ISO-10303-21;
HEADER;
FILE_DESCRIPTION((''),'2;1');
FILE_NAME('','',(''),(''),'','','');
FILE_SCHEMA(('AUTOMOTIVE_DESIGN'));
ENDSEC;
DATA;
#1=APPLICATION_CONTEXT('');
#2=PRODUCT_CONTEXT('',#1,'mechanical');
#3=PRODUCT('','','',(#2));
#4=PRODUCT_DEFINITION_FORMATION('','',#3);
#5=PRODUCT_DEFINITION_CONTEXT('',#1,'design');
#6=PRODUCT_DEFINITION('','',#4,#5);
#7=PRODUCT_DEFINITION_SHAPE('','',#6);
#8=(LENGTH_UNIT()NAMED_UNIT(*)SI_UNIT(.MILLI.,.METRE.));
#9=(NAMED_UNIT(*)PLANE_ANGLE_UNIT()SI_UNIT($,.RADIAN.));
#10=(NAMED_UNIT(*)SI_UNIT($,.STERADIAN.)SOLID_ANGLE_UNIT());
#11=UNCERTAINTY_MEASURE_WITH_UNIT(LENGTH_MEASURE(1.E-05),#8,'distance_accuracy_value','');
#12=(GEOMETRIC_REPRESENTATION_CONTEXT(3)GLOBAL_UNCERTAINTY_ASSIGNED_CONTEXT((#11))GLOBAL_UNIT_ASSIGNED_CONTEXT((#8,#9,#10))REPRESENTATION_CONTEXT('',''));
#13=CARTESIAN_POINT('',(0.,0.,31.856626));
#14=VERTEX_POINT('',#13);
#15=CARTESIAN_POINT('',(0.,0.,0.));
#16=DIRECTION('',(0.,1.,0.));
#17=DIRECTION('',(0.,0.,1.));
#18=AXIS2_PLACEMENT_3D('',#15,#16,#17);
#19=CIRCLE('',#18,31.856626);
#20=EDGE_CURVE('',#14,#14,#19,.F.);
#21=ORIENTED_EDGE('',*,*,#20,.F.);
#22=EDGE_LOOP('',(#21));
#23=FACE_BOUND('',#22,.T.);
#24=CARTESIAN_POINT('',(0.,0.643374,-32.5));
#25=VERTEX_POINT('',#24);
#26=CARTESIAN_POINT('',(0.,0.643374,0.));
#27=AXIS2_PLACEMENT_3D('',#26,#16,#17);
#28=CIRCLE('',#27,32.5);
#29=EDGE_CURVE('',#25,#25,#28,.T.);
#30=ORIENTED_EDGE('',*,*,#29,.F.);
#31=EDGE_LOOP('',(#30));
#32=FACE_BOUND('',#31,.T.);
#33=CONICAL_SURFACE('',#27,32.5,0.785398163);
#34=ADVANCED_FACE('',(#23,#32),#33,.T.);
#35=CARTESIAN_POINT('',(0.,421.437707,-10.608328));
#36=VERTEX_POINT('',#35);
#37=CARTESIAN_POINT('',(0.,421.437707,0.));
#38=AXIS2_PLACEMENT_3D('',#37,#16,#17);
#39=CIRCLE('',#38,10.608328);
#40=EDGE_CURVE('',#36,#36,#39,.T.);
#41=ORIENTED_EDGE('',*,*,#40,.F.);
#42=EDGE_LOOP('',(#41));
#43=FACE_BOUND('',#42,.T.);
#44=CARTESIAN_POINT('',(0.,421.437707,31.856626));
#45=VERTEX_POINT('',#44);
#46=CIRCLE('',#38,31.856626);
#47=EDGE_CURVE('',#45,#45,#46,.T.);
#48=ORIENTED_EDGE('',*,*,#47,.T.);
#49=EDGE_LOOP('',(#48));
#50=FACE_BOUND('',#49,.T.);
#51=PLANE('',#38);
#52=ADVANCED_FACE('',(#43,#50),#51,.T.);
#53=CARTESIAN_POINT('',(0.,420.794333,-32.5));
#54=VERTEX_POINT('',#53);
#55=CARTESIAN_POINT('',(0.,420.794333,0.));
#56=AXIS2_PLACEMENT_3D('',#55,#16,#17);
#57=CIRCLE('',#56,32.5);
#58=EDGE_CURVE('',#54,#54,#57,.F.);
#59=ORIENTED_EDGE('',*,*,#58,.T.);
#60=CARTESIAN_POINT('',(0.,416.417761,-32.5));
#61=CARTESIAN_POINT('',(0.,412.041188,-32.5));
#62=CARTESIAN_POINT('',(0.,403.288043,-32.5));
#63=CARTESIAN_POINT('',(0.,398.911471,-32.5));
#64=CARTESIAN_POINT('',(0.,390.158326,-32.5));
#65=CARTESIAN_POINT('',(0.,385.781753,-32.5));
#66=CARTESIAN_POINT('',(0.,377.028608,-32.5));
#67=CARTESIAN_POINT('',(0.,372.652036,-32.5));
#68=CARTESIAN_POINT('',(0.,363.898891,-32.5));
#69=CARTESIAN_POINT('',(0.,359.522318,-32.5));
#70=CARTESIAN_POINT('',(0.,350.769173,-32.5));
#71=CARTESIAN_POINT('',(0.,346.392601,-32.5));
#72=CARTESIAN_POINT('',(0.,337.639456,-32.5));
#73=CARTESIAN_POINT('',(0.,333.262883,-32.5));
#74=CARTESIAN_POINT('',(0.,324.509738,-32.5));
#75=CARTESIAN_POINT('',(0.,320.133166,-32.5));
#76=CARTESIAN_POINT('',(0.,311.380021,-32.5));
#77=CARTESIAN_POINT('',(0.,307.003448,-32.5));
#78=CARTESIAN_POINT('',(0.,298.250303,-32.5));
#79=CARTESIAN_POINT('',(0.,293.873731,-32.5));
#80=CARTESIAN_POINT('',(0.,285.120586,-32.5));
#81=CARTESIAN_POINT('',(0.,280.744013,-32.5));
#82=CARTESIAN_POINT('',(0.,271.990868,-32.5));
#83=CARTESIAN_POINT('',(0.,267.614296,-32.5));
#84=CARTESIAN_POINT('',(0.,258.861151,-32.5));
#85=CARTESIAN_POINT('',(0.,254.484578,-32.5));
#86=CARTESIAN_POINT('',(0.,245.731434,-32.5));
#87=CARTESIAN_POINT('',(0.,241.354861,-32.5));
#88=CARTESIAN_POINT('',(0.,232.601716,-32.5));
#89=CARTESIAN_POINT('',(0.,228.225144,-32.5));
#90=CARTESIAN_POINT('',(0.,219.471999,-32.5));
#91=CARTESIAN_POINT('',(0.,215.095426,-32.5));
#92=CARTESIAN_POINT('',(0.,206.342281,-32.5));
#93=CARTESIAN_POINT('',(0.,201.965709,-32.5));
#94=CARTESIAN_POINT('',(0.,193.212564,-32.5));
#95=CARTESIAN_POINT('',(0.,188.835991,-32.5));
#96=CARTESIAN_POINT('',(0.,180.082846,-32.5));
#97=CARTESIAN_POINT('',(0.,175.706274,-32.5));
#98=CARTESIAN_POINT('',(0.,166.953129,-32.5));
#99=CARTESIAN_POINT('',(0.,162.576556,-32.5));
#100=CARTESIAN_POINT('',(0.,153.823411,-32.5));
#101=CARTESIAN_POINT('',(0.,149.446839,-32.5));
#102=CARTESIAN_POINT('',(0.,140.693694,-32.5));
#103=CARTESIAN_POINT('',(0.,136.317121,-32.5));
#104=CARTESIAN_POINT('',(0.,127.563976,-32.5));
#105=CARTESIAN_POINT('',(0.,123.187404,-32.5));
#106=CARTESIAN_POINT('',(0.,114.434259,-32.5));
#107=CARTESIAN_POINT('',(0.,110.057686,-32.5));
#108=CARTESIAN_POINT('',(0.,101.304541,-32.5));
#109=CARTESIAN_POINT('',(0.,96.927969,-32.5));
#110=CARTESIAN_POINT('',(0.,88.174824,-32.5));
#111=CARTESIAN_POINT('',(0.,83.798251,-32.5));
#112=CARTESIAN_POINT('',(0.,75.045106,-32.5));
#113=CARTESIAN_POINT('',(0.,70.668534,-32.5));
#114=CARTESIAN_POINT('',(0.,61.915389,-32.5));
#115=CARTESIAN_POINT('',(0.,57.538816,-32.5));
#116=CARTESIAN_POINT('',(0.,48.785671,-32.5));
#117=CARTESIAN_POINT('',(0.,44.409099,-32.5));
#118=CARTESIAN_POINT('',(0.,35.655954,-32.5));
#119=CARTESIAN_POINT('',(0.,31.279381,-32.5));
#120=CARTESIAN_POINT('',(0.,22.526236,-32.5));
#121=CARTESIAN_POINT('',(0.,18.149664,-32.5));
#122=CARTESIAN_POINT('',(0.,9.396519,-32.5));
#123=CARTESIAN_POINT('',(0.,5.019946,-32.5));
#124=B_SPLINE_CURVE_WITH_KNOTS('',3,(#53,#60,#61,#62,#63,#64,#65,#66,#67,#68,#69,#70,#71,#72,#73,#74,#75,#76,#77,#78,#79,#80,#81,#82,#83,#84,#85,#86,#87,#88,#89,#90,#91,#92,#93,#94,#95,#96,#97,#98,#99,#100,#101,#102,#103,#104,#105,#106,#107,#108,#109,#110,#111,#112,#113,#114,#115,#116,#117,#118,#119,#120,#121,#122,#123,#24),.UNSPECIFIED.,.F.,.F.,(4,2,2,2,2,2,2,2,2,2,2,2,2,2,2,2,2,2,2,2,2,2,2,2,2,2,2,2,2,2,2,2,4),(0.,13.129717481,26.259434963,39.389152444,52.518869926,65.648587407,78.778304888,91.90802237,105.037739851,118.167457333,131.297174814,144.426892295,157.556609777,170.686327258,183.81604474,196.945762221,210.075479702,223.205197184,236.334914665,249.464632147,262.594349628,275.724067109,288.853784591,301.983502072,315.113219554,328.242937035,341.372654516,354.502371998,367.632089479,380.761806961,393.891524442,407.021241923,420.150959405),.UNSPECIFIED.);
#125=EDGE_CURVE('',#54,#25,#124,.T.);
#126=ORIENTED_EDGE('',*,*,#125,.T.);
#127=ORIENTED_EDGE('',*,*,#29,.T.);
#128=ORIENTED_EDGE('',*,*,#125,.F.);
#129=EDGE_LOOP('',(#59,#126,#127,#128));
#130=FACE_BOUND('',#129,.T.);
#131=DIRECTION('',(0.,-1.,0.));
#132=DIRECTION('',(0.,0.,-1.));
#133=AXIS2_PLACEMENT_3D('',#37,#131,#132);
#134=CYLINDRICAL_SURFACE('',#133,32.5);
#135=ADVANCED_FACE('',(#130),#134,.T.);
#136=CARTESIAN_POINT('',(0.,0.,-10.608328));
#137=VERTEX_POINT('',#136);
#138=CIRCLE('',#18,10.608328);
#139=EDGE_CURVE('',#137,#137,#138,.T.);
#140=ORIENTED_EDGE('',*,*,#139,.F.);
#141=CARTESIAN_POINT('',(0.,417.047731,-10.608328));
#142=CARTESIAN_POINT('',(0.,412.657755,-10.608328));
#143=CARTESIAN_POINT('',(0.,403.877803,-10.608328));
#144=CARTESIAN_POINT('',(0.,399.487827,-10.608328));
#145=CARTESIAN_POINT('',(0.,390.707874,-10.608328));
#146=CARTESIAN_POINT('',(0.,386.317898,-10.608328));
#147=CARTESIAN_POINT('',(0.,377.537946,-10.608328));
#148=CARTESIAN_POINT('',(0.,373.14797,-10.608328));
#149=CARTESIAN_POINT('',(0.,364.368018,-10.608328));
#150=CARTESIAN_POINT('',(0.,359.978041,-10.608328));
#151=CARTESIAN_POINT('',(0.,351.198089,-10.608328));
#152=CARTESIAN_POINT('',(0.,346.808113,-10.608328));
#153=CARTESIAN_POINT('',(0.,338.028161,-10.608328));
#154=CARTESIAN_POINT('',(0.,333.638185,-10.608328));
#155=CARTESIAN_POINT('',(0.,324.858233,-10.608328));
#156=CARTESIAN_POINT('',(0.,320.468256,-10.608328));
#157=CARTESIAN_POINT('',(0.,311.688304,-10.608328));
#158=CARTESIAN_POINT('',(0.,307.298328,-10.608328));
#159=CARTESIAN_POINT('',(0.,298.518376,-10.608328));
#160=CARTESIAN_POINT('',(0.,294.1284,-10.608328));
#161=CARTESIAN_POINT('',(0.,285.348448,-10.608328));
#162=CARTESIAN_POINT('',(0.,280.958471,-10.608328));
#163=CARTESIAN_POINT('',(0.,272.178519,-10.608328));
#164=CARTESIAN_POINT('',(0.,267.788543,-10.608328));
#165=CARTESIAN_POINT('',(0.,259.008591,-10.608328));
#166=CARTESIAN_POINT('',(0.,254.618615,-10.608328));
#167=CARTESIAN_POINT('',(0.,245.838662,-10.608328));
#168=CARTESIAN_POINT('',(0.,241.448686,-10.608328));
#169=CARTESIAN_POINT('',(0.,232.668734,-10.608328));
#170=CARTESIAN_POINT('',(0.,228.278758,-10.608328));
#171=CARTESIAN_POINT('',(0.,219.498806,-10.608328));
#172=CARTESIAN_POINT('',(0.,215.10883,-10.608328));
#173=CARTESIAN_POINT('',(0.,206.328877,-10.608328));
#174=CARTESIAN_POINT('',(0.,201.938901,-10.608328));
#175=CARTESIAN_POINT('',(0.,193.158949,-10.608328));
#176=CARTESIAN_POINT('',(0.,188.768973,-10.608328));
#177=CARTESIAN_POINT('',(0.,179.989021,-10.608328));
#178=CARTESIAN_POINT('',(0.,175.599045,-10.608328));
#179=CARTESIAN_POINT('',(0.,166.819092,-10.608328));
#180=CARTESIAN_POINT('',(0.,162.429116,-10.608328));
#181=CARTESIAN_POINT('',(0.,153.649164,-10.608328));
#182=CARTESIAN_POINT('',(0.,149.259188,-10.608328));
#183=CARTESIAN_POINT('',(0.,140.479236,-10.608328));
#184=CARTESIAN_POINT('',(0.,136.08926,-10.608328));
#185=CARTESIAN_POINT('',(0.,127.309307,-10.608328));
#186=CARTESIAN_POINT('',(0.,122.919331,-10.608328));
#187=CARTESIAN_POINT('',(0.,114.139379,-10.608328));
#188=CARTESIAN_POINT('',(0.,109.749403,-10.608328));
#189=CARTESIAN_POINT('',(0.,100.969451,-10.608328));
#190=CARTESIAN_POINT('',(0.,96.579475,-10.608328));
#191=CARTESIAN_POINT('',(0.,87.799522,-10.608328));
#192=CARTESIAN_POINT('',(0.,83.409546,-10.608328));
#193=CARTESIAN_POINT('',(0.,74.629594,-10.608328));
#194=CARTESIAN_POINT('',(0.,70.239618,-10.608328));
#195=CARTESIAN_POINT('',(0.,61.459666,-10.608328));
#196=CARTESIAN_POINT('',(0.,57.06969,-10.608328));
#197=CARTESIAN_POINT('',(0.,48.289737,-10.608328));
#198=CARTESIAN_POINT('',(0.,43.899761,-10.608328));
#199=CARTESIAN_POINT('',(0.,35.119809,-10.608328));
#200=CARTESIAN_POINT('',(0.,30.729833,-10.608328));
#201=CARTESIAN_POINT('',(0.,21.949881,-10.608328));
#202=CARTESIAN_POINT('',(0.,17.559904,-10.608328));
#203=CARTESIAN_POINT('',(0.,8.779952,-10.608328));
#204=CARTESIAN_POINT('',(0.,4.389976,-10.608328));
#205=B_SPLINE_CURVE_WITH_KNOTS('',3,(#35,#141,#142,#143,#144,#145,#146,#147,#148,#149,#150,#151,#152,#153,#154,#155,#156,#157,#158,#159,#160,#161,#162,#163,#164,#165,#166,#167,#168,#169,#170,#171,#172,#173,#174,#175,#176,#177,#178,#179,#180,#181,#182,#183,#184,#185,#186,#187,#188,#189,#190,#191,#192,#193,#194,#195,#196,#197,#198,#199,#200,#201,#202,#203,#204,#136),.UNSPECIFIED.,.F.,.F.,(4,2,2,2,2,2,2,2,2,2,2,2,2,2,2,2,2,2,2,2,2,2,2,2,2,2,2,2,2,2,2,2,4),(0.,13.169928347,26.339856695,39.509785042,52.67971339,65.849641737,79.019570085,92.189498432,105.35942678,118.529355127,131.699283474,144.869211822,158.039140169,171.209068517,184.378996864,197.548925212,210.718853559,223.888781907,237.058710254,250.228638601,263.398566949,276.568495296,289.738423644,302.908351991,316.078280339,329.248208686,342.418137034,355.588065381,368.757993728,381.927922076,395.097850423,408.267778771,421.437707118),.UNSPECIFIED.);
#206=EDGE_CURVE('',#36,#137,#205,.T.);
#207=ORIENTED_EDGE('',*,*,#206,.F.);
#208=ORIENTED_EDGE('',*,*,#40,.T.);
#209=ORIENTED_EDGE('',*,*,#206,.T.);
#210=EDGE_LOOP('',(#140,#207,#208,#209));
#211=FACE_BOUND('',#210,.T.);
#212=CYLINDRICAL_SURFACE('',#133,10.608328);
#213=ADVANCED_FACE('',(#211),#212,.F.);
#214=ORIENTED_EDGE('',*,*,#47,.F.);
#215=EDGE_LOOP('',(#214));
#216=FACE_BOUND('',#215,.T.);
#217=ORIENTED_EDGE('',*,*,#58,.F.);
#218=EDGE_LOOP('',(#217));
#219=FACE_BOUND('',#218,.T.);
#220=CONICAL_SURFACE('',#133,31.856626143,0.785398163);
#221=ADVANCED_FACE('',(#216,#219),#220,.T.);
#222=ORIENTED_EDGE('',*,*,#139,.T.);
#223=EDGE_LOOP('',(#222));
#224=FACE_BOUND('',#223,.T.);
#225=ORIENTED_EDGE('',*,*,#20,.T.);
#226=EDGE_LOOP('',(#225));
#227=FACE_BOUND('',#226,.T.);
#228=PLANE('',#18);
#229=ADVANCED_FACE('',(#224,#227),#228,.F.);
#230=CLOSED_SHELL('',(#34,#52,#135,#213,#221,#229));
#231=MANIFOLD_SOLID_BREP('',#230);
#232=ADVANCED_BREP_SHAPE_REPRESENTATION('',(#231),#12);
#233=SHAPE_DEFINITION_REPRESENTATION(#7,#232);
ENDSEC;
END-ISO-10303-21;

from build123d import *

# Parameters (mm, degrees)
SKETCH1_R           = 32.5
BOSS_EXTRUDE1_DEPTH = 421.437707118
SKETCH2_R           = 10.60832831
CUT_EXTRUDE1_DEPTH  = 424.93660019
CHAMFER1_SIZE       = 0.643373857


with BuildPart() as part:
    # Sketch1 → Boss-Extrude1 (new body)
    with BuildSketch(Plane(origin=(0, 0, 0), x_dir=(1, 0, 0), z_dir=(0, 1, 0))):
        Circle(SKETCH1_R)
    extrude(amount=BOSS_EXTRUDE1_DEPTH)

    # Sketch2 → Cut-Extrude1 (cut, through all)
    with BuildSketch(Plane(origin=(0, 0, 0), x_dir=(1, 0, 0), z_dir=(0, 1, 0))):
        Circle(SKETCH2_R)
    extrude(amount=CUT_EXTRUDE1_DEPTH, mode=Mode.SUBTRACT)

    # Chamfer1
    chamfer1_edges = [part.edges().sort_by_distance(p)[0] for p in [
        (-32.5, 421.437707118, 0),
        (-32.5, 0, 0),
    ]]
    chamfer(chamfer1_edges, length=CHAMFER1_SIZE)


solid = part.part
